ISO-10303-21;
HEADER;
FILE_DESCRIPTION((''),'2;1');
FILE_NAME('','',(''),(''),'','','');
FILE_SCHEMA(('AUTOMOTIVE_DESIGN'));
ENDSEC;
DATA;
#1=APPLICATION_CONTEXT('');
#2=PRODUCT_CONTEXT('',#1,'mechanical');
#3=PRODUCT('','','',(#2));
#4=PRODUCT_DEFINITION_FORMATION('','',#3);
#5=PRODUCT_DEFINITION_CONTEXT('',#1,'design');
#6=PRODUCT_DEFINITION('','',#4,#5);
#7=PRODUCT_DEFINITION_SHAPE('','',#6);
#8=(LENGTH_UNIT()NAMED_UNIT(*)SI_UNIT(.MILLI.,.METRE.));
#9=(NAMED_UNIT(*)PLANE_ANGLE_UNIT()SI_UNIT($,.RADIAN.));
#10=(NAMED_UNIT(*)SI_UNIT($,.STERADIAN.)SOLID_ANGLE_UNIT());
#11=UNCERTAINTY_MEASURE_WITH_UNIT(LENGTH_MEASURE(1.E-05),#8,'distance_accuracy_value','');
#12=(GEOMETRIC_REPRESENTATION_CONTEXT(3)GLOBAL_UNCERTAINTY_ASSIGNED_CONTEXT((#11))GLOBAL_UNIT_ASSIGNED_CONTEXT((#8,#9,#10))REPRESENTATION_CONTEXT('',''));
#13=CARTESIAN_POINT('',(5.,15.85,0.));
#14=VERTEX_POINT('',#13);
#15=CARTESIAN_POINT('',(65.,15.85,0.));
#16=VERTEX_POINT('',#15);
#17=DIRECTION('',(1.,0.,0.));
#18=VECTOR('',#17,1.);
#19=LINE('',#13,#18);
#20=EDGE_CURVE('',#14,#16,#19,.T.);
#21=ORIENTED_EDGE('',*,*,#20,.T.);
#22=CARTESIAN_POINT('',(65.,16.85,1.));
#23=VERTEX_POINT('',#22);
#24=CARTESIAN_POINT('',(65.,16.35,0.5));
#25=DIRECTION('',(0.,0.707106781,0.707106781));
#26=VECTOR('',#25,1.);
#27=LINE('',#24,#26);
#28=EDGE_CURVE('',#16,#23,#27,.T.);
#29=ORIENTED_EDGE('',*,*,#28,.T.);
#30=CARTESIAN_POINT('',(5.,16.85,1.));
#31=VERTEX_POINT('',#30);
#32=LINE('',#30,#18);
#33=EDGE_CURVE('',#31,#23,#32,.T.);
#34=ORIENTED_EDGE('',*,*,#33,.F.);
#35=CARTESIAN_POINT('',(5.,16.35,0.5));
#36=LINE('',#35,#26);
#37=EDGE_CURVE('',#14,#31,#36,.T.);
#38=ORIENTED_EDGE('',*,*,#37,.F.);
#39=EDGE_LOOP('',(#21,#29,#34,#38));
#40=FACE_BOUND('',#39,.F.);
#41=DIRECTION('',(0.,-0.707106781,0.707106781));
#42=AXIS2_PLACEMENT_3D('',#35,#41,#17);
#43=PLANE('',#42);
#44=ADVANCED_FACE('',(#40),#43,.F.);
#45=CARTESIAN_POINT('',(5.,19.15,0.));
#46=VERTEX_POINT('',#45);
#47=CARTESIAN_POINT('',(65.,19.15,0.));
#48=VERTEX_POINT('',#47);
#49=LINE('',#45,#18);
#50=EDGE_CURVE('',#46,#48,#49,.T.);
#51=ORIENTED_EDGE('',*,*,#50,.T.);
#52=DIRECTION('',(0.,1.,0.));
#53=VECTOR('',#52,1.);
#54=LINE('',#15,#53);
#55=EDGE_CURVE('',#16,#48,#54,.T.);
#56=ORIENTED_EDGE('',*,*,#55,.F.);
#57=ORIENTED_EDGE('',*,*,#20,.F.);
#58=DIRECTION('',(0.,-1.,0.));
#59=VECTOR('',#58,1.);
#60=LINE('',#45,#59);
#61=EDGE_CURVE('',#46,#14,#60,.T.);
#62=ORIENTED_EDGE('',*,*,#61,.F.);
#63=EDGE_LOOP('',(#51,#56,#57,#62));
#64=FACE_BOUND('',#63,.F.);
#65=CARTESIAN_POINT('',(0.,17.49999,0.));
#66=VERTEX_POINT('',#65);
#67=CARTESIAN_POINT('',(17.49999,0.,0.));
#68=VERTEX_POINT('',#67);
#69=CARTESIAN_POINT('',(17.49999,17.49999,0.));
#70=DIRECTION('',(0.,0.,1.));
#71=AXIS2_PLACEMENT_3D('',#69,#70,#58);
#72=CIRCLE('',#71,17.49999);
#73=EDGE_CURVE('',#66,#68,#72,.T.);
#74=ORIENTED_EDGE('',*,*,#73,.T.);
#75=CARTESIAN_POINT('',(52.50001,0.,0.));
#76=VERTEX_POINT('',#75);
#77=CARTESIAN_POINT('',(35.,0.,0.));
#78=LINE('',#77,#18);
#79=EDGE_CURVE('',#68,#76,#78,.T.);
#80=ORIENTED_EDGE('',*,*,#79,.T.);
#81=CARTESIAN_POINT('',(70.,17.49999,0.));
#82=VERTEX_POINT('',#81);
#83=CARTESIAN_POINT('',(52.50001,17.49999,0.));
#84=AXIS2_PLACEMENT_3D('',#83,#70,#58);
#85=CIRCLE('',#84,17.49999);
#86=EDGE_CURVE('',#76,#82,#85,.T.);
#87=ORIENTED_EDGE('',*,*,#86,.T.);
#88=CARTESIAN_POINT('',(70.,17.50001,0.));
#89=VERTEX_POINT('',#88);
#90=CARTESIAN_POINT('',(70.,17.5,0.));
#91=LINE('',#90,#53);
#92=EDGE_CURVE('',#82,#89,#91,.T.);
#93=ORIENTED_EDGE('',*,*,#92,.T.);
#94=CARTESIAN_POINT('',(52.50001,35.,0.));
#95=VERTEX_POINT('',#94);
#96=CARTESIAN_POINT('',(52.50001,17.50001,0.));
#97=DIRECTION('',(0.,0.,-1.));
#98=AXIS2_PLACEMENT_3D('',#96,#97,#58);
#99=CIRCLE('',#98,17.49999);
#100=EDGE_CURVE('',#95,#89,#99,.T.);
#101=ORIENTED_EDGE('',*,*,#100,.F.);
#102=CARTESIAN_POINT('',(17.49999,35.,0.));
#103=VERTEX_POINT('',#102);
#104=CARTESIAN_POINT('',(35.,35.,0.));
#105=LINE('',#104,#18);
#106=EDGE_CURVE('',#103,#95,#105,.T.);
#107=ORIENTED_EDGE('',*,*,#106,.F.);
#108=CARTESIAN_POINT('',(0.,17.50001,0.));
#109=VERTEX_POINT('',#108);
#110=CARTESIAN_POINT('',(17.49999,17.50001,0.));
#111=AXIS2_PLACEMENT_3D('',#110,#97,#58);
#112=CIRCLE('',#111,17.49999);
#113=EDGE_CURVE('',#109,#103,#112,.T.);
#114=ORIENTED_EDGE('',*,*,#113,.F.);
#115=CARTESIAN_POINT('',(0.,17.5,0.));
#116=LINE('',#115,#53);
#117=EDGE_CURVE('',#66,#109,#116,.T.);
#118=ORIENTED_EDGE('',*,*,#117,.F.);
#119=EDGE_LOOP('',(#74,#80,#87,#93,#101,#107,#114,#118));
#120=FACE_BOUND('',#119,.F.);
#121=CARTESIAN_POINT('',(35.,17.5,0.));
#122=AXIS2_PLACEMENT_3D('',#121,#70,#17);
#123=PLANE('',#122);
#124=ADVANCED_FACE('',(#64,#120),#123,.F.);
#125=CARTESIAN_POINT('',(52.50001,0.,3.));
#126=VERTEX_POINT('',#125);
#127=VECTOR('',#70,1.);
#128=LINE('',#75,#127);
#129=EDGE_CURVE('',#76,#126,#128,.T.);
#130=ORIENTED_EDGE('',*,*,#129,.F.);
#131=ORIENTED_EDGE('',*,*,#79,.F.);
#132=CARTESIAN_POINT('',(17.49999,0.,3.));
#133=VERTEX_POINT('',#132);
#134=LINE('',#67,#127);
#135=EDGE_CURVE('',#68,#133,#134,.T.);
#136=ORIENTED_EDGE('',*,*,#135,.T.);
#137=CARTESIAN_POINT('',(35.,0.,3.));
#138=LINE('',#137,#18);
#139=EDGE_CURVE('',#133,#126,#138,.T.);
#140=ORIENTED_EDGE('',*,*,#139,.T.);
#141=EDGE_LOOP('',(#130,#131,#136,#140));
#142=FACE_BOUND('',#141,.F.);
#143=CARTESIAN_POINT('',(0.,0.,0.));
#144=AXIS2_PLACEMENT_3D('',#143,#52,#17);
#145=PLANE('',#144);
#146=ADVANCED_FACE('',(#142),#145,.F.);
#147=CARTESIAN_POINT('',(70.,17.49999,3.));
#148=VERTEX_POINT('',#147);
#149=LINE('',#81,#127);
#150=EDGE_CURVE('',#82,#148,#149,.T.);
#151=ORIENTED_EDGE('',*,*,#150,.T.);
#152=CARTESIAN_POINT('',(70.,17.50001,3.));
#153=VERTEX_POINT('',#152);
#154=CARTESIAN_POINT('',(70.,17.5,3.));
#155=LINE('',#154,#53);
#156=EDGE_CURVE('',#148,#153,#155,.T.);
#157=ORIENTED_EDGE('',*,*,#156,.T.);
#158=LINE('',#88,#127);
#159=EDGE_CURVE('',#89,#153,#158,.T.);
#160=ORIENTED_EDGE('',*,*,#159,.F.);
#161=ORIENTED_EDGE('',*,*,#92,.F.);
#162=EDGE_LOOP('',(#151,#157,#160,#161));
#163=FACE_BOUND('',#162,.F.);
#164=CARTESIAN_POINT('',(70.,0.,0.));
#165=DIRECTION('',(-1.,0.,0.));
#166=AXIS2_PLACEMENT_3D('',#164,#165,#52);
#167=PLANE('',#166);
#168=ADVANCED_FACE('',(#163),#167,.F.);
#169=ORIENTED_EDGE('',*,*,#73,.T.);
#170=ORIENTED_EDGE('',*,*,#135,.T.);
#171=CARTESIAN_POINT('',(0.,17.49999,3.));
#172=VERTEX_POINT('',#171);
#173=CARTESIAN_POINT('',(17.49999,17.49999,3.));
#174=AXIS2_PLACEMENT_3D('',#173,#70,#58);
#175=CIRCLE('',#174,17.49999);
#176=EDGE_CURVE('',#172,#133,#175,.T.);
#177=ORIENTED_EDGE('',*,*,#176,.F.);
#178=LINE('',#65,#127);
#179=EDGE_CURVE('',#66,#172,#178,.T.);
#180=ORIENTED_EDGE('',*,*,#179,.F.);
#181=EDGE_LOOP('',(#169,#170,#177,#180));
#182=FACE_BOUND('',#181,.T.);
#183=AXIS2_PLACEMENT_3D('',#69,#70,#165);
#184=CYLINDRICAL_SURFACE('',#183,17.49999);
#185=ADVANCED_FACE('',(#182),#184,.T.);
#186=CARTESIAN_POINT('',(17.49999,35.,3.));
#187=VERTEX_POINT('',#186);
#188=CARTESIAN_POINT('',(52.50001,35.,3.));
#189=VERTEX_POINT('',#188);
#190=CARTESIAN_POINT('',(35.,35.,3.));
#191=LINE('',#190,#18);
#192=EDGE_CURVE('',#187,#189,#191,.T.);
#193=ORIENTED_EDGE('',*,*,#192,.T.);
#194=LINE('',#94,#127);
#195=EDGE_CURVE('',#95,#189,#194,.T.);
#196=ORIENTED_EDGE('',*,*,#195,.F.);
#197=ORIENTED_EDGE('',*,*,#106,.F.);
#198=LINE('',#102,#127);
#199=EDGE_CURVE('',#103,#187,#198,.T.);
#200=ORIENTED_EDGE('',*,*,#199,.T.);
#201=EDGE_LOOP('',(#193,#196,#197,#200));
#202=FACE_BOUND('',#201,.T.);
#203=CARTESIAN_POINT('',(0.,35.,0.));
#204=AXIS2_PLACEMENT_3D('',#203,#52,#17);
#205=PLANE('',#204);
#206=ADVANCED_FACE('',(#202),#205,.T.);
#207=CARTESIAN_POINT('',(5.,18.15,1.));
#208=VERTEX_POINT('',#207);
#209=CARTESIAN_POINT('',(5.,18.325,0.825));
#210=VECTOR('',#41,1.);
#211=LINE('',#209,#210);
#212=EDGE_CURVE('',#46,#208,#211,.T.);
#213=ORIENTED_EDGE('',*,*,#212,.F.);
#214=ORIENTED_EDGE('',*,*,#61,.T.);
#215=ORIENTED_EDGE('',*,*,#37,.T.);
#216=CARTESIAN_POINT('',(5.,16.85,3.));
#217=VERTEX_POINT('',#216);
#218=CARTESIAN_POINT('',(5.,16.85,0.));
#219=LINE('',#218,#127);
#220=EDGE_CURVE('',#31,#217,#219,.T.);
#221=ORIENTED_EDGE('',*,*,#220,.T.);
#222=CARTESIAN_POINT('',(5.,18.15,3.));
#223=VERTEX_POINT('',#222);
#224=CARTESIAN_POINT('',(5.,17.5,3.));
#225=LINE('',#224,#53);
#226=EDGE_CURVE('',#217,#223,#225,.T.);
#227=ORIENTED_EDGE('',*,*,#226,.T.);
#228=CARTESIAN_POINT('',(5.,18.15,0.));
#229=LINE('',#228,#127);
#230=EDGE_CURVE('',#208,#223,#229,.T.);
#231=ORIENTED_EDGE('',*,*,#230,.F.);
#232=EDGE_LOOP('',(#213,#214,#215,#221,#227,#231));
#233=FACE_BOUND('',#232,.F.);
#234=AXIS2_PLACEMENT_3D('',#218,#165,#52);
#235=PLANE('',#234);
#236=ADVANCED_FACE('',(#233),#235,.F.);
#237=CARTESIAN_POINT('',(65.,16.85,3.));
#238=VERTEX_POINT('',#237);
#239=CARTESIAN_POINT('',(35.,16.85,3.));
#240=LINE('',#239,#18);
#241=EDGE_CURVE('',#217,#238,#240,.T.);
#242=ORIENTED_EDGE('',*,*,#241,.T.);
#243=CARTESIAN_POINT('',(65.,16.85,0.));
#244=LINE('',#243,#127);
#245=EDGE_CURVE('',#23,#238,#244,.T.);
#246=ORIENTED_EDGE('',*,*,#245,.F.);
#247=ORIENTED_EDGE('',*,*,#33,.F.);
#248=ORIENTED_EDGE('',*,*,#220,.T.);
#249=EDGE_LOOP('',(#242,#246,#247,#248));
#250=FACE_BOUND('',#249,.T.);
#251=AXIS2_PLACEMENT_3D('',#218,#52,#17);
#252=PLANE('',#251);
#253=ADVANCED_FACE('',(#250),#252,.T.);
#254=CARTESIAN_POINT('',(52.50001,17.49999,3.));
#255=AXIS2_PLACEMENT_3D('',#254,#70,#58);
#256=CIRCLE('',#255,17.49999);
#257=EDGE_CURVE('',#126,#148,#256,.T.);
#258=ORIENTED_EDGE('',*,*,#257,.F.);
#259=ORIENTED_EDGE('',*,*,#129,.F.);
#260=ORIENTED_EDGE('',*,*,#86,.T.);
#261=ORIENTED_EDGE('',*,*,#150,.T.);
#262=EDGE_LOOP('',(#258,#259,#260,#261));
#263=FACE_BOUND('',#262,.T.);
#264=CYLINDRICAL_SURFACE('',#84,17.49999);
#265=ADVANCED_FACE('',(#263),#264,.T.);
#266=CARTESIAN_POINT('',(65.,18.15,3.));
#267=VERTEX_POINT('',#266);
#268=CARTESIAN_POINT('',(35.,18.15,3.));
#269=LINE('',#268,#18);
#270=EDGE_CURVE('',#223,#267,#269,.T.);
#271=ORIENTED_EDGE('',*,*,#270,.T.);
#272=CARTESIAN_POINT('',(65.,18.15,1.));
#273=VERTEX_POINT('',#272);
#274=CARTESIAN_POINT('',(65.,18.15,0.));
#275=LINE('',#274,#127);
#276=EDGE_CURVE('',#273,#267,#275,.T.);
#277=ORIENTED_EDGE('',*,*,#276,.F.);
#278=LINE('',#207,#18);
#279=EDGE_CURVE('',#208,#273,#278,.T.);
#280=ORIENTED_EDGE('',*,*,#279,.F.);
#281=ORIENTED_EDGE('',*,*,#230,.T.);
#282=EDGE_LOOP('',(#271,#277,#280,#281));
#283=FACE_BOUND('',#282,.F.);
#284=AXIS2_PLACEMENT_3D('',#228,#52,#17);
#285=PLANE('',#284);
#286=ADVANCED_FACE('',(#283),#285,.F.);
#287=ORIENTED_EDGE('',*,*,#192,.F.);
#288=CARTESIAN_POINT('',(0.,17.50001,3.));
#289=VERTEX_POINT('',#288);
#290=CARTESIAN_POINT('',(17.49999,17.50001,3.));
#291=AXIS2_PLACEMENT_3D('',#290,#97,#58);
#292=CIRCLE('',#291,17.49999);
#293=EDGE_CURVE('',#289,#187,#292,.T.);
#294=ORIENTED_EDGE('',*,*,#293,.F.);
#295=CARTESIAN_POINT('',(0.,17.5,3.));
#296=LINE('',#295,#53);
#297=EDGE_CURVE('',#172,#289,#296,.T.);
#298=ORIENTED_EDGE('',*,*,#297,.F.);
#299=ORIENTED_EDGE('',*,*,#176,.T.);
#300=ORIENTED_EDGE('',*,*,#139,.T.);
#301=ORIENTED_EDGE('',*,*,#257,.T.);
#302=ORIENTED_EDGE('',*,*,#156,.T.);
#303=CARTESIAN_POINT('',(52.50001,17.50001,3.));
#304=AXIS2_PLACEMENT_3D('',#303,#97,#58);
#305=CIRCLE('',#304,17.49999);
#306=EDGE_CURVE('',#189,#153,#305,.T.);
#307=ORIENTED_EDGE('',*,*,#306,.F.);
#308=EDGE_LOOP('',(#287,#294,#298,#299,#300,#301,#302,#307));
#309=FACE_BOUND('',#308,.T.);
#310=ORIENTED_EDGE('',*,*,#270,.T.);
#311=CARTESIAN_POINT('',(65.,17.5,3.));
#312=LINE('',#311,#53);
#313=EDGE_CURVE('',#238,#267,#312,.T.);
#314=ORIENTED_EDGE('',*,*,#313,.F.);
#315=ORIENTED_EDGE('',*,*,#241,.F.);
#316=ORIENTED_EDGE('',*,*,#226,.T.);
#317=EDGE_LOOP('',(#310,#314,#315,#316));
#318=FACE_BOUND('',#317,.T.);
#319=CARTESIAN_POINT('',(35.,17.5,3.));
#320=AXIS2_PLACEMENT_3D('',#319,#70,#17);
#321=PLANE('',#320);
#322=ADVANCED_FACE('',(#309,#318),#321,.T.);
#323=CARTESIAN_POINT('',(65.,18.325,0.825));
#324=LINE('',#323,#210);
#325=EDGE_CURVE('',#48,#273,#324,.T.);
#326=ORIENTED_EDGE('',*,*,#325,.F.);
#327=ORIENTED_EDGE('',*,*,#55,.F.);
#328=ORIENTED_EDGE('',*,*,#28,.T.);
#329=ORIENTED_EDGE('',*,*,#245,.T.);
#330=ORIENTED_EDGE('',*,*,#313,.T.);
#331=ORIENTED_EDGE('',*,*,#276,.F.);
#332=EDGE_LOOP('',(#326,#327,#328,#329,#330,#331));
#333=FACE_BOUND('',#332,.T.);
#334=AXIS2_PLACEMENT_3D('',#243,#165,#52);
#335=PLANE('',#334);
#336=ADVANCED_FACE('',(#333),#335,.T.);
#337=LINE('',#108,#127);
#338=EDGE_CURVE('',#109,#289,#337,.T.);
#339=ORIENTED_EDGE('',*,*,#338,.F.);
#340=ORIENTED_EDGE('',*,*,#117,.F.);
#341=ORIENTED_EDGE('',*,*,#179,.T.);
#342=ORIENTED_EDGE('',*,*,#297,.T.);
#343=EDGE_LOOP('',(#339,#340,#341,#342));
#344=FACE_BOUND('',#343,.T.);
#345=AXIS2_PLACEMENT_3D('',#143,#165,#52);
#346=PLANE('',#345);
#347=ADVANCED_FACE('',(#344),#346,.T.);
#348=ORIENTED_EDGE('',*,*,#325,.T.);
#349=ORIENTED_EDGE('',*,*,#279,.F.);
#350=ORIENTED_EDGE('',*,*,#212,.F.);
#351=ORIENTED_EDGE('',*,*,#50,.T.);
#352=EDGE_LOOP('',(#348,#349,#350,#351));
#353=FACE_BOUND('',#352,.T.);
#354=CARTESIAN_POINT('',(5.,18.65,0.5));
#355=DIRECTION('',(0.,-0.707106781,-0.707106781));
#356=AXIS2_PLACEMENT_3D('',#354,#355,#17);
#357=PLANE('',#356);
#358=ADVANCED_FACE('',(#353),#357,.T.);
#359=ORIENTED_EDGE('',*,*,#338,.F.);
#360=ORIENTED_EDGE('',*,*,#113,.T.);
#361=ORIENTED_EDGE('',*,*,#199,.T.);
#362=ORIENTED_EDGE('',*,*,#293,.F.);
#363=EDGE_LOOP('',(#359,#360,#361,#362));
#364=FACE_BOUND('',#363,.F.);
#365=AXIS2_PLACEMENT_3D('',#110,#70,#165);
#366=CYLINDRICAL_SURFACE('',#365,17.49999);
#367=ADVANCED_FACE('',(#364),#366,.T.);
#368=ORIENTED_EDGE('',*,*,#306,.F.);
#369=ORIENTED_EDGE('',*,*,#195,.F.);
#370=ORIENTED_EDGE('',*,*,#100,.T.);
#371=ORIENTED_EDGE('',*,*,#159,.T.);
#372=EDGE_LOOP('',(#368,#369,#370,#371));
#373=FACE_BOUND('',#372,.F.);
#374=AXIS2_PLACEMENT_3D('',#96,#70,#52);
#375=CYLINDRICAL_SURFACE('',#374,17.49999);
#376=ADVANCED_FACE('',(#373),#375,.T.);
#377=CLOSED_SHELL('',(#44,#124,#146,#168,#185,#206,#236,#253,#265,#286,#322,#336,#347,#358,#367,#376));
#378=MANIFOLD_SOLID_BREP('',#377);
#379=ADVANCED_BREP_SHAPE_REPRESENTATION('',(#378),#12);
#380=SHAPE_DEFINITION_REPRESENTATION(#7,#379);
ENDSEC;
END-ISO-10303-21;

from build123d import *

# Parameters (mm, degrees)
F0_W     = 70
F0_H     = 35
F0_W_2   = 60
F0_H_2   = 1.3
F1_DEPTH = 3
F2_R     = 17.49999
F3_SIZE  = 1


# Not quite as in the source:
# - a fillet or chamfer is up to 0.001 mm smaller than in the source, because OpenCascade refuses the exact size


with BuildPart() as f1:
    # F0 (on Top) → F1 (new body)
    with BuildSketch(Plane.XY):
        with Locations((35, 17.5)):
            Rectangle(F0_W, F0_H)
        with Locations((35, 17.5)):
            Rectangle(F0_W_2, F0_H_2, mode=Mode.SUBTRACT)
    extrude(amount=F1_DEPTH)

    # F2 (radius 17.5 in the source; OpenCascade refuses exactly that, so slightly less here)
    f2_edges = [f1.edges().sort_by_distance(p)[0] for p in [
        (70, 0, 1.5),
        (70, 35, 1.5),
        (0, 35, 1.5),
        (0, 0, 1.5),
    ]]
    fillet(f2_edges, radius=F2_R)

    # F3
    f3_edges = [f1.edges().sort_by_distance(p)[0] for p in [
        (35, 16.85, 0),
        (35, 18.15, 0),
    ]]
    chamfer(f3_edges, length=F3_SIZE)


solid = f1.part
